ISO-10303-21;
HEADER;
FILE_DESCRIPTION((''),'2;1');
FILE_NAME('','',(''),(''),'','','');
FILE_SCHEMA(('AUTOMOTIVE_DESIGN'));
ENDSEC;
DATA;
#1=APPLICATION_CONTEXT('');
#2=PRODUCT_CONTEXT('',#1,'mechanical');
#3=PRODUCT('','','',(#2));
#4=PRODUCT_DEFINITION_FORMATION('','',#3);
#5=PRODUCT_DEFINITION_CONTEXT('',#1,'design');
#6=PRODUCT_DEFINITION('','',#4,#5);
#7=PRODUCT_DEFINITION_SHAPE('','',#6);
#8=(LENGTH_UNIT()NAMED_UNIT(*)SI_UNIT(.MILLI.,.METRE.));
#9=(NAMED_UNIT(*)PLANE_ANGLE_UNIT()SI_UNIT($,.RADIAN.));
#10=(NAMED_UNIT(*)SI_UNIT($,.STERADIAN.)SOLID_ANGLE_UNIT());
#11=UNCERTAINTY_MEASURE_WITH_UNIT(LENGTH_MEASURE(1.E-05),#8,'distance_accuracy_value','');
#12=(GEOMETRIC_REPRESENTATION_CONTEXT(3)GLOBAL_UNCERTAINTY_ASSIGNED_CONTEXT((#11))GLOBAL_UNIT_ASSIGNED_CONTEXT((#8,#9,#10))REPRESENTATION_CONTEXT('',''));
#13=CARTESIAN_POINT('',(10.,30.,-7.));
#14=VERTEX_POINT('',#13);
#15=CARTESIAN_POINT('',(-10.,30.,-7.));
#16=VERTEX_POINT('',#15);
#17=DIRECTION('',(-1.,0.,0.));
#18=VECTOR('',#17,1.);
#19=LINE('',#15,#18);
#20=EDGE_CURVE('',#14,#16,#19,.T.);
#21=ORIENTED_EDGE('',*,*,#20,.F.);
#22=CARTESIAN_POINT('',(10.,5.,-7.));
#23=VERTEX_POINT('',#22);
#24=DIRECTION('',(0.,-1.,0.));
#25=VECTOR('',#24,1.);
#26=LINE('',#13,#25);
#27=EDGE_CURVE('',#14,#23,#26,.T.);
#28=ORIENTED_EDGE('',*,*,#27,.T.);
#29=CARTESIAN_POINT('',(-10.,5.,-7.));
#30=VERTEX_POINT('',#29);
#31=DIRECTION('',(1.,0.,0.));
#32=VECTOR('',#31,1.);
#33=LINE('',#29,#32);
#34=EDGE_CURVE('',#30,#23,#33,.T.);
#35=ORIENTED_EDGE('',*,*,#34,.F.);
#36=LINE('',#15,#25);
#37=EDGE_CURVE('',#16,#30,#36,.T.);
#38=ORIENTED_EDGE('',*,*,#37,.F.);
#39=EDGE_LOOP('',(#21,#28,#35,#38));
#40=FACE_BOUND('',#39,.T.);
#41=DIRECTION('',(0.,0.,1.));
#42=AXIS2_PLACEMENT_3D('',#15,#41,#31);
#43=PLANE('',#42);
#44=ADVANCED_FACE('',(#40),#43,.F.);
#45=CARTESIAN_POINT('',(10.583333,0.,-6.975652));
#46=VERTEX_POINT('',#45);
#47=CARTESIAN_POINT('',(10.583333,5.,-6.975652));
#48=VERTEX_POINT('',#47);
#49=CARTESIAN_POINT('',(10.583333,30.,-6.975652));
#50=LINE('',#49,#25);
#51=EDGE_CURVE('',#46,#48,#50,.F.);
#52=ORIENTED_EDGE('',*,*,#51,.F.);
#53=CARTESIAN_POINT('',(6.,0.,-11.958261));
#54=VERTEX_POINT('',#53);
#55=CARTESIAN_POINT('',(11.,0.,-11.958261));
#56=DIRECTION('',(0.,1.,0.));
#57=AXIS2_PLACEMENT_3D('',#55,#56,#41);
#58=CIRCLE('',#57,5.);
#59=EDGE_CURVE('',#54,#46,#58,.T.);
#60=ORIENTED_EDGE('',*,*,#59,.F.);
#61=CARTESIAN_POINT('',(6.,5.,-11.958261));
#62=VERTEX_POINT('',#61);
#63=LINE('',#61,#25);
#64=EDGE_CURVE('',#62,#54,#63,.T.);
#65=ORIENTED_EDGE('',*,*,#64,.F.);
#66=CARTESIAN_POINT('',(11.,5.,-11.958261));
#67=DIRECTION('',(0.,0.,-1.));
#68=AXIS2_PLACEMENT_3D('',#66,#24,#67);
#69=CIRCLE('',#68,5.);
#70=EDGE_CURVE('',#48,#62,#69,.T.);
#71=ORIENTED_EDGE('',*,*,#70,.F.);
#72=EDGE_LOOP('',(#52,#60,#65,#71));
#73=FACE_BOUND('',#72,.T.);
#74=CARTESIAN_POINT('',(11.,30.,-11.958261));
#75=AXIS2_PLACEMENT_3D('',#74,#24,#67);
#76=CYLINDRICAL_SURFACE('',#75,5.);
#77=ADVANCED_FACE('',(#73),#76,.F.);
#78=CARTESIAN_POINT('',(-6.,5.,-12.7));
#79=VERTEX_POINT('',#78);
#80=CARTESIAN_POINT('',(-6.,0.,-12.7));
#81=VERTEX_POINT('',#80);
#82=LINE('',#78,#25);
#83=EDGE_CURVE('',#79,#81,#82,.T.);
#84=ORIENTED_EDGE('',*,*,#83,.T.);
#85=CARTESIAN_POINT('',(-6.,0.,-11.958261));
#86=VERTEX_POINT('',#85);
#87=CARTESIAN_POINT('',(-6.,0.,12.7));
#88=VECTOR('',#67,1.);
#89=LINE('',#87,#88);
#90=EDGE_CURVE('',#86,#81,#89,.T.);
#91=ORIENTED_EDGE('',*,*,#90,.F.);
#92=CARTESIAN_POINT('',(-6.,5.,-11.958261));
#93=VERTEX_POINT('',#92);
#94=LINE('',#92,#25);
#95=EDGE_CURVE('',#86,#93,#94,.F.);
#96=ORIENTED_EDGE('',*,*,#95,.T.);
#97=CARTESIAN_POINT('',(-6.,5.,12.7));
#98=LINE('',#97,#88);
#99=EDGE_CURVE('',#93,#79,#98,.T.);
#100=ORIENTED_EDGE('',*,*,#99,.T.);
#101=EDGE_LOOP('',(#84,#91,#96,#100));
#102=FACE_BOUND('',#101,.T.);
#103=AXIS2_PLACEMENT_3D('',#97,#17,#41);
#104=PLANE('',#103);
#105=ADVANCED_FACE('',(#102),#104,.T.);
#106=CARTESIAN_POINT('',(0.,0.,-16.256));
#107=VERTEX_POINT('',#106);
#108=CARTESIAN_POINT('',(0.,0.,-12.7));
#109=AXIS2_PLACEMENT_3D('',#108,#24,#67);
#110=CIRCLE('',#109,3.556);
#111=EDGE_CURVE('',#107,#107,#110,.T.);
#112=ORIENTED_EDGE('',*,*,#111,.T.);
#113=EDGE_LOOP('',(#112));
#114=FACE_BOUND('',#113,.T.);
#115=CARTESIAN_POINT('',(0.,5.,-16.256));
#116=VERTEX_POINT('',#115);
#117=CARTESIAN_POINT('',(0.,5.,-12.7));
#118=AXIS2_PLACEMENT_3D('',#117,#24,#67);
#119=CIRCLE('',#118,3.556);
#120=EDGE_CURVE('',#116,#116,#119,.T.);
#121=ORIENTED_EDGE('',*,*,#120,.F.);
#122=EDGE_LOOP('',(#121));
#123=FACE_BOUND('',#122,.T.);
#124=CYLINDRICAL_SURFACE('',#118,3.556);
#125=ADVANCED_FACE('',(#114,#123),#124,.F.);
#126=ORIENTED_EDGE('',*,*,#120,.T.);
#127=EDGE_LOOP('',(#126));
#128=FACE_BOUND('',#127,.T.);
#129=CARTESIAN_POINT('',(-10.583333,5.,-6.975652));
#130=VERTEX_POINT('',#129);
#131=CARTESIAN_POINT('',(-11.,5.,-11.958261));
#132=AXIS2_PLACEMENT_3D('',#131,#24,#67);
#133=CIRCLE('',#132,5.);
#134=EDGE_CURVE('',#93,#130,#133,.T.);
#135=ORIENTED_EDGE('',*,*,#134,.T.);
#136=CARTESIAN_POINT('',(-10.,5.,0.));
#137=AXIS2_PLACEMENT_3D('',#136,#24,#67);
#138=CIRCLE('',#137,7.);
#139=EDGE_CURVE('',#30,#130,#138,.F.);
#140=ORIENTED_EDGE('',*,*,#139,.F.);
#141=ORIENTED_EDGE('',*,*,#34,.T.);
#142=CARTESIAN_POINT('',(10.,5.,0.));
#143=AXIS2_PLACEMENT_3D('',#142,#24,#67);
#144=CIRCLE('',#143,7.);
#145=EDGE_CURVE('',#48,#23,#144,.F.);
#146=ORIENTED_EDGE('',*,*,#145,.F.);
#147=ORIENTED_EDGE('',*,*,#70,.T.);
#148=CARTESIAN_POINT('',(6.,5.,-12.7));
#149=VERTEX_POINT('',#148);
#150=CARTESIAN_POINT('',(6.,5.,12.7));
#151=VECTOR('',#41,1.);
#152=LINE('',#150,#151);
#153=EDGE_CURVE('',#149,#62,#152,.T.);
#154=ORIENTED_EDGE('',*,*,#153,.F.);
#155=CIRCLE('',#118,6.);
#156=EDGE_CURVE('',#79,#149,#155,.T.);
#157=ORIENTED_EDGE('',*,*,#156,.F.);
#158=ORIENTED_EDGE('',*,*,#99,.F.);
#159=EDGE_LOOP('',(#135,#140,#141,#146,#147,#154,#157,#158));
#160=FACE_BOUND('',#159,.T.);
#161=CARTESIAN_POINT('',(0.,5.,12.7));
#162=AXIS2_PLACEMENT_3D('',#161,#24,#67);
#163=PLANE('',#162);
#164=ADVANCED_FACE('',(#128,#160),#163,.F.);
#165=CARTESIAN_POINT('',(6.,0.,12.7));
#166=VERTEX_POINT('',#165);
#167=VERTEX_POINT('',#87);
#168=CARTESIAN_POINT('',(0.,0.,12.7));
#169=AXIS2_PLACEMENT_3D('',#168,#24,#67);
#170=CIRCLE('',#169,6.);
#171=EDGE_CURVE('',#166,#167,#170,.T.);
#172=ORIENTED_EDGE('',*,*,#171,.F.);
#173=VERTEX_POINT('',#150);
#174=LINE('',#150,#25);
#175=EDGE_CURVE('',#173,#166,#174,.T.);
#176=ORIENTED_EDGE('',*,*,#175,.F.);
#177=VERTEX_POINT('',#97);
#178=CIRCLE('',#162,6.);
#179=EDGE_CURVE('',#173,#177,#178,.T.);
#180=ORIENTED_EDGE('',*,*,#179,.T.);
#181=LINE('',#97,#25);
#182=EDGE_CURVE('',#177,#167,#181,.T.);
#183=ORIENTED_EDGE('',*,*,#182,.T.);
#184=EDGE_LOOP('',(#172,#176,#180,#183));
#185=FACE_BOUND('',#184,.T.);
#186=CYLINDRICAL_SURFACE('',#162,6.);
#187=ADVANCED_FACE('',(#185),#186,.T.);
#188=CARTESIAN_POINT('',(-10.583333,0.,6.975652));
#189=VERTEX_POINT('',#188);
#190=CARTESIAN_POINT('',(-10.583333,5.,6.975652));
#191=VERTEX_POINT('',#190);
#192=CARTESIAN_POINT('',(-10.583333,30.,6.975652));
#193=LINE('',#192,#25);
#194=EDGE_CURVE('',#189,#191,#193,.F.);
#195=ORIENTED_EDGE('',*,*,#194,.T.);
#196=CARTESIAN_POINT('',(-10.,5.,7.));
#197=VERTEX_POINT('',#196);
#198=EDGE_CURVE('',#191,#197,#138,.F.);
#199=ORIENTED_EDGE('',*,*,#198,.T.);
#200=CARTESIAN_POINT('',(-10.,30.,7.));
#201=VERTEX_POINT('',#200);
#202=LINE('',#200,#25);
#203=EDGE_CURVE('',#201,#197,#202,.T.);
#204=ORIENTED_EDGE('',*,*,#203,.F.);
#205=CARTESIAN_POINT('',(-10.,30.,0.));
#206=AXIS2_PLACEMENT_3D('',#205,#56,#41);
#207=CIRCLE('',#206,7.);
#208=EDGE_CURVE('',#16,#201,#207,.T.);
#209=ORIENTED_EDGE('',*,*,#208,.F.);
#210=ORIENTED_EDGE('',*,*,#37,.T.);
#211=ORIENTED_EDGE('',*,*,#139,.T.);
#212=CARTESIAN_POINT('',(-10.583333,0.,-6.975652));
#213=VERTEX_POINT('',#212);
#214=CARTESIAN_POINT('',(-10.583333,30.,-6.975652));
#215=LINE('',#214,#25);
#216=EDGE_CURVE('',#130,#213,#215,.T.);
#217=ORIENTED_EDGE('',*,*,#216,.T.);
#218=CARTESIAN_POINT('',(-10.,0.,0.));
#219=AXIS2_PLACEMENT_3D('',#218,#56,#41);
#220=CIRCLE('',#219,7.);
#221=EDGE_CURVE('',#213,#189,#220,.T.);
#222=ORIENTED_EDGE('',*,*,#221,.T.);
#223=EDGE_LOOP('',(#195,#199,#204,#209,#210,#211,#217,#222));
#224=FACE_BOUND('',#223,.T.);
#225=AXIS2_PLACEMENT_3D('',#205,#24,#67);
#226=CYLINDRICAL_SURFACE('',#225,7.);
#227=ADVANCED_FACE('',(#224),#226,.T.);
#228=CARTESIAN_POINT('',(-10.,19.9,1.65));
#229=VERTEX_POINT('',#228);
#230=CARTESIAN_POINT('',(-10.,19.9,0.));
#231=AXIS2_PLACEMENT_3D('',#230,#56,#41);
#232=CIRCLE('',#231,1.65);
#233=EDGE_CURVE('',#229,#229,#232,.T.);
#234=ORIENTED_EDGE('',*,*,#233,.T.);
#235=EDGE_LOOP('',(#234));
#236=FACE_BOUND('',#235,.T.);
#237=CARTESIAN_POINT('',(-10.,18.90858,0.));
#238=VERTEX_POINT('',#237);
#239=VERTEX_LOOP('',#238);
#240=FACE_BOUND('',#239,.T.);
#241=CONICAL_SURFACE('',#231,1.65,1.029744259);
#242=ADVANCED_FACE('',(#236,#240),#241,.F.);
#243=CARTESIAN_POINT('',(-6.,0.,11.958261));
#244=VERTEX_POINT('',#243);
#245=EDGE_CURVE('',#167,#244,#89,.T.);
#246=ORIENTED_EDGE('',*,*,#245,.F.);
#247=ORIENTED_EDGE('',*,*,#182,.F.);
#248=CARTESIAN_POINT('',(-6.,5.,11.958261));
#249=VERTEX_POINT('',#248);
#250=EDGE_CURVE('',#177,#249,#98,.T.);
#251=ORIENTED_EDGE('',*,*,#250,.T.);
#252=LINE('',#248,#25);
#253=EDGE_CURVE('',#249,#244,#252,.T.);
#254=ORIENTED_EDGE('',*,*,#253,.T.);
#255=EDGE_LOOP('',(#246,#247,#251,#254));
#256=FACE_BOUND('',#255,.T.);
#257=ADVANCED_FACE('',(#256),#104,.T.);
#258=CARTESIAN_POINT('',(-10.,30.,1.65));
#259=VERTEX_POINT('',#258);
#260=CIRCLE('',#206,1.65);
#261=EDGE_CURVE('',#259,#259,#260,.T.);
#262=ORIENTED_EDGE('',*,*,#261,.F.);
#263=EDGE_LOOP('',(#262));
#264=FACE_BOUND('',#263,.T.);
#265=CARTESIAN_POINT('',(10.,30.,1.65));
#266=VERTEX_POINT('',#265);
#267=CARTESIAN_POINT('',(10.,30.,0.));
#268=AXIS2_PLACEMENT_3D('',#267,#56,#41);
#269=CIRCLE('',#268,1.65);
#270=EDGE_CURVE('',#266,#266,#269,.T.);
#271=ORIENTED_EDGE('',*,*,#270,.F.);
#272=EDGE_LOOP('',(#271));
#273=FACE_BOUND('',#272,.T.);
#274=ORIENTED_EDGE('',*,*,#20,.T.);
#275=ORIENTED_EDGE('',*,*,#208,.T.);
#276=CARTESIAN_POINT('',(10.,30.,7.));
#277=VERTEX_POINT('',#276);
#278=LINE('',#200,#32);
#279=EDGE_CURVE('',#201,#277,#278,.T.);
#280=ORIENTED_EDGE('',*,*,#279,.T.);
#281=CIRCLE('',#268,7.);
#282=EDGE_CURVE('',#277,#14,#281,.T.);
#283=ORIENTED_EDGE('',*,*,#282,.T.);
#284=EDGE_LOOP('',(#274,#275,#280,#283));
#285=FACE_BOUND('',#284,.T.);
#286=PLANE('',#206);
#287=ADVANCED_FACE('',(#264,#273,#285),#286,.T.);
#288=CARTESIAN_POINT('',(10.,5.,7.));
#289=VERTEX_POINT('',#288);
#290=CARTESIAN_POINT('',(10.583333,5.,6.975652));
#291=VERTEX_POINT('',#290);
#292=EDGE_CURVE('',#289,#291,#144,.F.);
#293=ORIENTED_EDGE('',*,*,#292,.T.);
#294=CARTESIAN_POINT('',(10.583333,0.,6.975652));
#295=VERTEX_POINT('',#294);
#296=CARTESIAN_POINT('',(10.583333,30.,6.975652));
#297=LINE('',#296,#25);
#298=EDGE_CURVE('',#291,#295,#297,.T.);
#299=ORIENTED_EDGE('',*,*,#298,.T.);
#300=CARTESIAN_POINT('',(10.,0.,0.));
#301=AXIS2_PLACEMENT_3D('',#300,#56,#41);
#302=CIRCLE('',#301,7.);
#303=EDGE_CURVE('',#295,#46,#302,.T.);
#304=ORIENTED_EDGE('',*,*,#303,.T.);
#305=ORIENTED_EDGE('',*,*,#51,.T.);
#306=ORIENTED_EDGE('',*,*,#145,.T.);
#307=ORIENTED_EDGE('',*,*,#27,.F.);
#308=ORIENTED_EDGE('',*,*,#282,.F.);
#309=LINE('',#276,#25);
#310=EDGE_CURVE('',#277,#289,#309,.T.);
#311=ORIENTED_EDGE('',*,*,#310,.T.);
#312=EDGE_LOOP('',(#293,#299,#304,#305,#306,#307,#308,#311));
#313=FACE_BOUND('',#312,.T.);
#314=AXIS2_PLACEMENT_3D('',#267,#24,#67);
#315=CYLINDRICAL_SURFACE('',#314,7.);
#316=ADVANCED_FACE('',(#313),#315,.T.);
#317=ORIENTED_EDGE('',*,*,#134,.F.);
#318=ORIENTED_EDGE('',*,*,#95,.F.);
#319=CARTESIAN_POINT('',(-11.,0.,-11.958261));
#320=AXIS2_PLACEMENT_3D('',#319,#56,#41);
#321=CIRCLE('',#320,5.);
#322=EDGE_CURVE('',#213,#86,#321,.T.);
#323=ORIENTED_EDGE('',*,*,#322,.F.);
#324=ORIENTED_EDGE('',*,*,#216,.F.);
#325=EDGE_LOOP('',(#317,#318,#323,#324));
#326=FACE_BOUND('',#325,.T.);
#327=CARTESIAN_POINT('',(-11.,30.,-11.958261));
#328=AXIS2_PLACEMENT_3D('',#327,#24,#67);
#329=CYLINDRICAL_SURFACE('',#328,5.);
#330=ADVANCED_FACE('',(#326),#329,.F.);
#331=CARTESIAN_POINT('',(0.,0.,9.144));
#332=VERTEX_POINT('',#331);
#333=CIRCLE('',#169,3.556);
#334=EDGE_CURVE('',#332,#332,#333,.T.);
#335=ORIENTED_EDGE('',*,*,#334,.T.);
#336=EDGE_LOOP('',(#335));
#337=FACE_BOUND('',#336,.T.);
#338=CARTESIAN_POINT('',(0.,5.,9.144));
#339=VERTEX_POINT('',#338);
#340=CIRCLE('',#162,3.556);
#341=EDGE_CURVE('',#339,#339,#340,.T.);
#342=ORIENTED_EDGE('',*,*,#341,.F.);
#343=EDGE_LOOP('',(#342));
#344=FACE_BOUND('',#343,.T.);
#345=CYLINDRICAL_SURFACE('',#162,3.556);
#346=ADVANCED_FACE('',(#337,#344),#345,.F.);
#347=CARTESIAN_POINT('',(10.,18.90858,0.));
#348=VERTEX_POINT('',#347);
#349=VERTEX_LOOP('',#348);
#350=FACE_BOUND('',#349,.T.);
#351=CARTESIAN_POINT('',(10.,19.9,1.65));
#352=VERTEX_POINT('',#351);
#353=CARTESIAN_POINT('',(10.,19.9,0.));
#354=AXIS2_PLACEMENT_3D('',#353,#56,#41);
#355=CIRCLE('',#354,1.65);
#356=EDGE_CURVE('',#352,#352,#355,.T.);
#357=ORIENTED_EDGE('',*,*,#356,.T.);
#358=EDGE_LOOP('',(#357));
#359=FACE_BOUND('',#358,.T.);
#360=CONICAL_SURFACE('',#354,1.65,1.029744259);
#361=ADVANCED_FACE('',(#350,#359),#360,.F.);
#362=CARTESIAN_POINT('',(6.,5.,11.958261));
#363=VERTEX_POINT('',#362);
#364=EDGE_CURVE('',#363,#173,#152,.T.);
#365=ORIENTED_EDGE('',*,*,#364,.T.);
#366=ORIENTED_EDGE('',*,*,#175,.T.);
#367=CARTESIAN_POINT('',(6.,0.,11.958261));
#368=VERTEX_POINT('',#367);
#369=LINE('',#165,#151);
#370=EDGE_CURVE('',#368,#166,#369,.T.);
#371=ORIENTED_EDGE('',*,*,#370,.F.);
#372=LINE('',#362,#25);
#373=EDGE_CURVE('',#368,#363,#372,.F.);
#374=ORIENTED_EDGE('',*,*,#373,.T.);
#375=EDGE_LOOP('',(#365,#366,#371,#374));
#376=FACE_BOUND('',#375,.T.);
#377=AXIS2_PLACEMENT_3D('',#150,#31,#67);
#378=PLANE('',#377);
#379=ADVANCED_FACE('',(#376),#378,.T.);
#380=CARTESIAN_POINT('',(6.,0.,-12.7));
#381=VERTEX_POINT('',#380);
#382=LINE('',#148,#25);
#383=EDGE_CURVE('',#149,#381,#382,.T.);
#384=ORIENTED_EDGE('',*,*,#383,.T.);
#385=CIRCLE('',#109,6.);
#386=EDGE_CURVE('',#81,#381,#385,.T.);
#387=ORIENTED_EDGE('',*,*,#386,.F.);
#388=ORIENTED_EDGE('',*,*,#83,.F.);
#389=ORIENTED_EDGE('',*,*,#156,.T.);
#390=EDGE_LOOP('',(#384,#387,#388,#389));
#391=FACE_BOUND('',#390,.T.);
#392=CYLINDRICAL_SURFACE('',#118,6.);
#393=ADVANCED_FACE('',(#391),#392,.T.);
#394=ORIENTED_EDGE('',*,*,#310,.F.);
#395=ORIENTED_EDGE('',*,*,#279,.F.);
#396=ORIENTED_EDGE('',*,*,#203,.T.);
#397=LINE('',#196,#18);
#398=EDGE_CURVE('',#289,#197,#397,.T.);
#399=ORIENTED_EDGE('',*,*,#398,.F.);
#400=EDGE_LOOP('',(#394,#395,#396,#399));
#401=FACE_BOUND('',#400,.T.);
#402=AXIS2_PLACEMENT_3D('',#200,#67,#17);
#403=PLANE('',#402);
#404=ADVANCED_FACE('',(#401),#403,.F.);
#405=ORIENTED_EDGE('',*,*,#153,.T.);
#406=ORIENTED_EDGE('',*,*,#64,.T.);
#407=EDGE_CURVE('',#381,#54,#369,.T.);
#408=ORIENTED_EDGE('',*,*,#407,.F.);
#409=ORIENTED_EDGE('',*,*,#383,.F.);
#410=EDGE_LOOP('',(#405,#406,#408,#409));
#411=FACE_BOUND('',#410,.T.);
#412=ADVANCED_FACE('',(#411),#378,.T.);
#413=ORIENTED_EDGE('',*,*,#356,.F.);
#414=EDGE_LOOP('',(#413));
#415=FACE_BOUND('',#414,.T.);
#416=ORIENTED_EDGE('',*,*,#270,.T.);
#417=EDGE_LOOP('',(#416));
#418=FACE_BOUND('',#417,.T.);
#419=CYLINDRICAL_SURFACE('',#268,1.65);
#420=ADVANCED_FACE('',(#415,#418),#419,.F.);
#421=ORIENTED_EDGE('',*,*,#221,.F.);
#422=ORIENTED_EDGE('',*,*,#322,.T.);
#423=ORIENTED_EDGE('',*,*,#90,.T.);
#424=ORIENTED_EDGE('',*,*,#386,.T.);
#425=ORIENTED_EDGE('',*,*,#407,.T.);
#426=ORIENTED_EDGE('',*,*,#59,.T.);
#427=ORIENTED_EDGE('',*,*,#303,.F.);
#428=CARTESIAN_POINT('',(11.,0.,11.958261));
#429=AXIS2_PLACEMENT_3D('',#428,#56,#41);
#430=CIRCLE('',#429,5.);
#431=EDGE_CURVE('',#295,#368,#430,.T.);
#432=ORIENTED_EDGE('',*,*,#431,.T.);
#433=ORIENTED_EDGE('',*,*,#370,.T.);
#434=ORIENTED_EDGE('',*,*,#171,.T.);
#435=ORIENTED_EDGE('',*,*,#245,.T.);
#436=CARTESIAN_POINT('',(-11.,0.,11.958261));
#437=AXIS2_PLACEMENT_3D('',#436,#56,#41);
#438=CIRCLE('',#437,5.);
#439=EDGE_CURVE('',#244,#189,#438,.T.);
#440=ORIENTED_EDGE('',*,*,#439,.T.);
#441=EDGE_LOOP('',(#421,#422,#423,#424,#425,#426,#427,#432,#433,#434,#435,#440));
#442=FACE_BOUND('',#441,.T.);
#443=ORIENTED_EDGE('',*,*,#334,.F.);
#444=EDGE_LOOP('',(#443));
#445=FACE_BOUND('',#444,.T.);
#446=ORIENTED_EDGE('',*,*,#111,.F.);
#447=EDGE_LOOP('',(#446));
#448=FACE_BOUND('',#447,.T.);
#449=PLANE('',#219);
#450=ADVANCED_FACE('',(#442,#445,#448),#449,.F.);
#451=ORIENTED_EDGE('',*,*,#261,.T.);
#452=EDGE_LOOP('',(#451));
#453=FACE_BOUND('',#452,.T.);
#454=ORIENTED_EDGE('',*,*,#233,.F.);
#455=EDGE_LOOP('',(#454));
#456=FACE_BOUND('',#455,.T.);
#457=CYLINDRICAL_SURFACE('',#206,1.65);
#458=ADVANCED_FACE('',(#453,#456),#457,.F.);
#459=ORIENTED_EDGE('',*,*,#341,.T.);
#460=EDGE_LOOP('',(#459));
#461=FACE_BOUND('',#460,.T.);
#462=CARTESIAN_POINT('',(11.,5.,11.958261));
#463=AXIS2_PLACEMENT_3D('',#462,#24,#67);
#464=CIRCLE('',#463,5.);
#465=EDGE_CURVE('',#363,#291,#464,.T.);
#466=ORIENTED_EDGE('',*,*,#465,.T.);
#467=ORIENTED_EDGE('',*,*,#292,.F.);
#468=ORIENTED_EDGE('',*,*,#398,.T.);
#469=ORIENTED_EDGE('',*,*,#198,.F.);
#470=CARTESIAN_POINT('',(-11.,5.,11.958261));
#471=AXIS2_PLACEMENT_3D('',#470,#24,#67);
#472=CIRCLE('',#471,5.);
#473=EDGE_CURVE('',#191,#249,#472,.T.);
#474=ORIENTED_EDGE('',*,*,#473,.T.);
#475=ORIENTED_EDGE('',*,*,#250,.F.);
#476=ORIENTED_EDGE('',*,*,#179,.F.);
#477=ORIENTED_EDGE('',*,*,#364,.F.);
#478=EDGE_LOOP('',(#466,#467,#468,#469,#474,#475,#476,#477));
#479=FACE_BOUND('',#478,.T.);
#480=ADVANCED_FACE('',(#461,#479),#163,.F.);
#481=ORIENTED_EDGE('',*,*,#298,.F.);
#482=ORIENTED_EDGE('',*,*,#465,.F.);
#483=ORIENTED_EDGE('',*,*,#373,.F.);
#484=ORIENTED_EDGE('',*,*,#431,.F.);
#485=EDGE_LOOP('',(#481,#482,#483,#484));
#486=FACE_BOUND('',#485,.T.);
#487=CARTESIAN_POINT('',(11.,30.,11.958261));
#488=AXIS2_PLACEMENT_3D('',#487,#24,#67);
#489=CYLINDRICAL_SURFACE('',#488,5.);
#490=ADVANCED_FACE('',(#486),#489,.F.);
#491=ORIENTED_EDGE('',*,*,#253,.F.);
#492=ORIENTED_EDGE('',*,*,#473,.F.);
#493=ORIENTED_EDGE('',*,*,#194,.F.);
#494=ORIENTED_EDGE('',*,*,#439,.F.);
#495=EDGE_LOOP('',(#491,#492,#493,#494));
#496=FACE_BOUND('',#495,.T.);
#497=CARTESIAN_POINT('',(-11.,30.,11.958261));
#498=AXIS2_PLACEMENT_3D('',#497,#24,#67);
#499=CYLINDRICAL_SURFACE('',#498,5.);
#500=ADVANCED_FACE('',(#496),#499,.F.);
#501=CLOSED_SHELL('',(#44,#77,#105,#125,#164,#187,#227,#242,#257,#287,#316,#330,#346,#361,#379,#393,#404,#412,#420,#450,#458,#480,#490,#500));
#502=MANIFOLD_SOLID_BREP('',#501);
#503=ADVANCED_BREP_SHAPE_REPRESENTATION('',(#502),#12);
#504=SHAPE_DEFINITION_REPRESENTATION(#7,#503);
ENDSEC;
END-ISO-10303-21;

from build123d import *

# Parameters (mm, degrees)
BOSS_EXTRUDE1_DEPTH       = 30
M4X0_7_TAPPED_HOLE1_D     = 3.3
M4X0_7_TAPPED_HOLE1_DEPTH = 10.1
M4X0_7_TAPPED_HOLE1_TIP   = 0.991420021
SKETCH4_R                 = 3.556
BOSS_EXTRUDE2_DEPTH       = 5
FILLET1_R                 = 5


with BuildPart() as part:
    # Sketch1 → Boss-Extrude1 (new body)
    with BuildSketch(Plane(origin=(0, 0, 0), x_dir=(1, 0, 0), z_dir=(0, 1, 0))):
        with BuildLine():
            Line((-10, -7), (10, -7))
            ThreePointArc((10, -7), (17, 0), (10, 7))
            Line((10, 7), (-10, 7))
            ThreePointArc((-10, 7), (-17, 0), (-10, -7))
        make_face()
    extrude(amount=BOSS_EXTRUDE1_DEPTH)

    # M4x0.7 Tapped Hole1
    with Locations(Plane(origin=(0, 30, 0), x_dir=(1, 0, 0), z_dir=(0, 1, 0))):
        with Locations((-10, 0), (10, 0)):
            Hole(M4X0_7_TAPPED_HOLE1_D / 2, depth=M4X0_7_TAPPED_HOLE1_DEPTH)
            with Locations((0, 0, -(M4X0_7_TAPPED_HOLE1_DEPTH + M4X0_7_TAPPED_HOLE1_TIP / 2))):  # 118° drill point
                Cone(0, M4X0_7_TAPPED_HOLE1_D / 2, M4X0_7_TAPPED_HOLE1_TIP, mode=Mode.SUBTRACT)

    # Sketch4 → Boss-Extrude2 (add)
    with BuildSketch(Plane.XZ):
        with BuildLine():
            Line((6, 12.7), (6, -12.7))
            ThreePointArc((6, -12.7), (0, -18.7), (-6, -12.7))
            Line((-6, -12.7), (-6, 12.7))
            ThreePointArc((-6, 12.7), (0, 18.7), (6, 12.7))
        make_face()
        with Locations(Location((0, 12.7, 0), (0, 0, 270))):
            Circle(SKETCH4_R, mode=Mode.SUBTRACT)
        with Locations(Location((0, -12.7, 0), (0, 0, 270))):
            Circle(SKETCH4_R, mode=Mode.SUBTRACT)
    extrude(amount=-BOSS_EXTRUDE2_DEPTH)

    # Fillet1
    # the kernel refuses this fillet: 5 mm, written as the material it adds along each edge
    with BuildSketch(Plane(origin=(-6, 5, 7), x_dir=(-0.9999858901973535, 0, -0.0053121941047544466), z_dir=(0, -1, 0)), Plane(origin=(-6, 0, -7), x_dir=(-0.9999858901973535, 0, 0.005312194104754061), z_dir=(0, 1, 0)), Plane(origin=(6, 5, -7), x_dir=(0.9999858901973535, 0, 0.005312194104753284), z_dir=(0, -1, 0)), Plane(origin=(6, 0, 7), x_dir=(0.9999858901973535, 0, -0.0053121941047534794), z_dir=(0, 1, 0))) as fillet1_piece_1:
        with BuildLine():
            CenterArc((4.973590207, -4.984751754), FILLET1_R, 94.475824114, 85.219808153)
            Line((-0.026339243, -4.958190783), (-0.526332189, -4.955534686))
            Line((-0.526332189, -4.955534686), (-0.499992945, 0.002656097))
            Line((-0.499992945, 0.002656097), (0.002656097, 0.499992945))
            ThreePointArc((0.002656097, 0.499992945), (4.002599658, 0.478744169), (4.544378784, 0.498475175))
            Line((4.544378784, 0.498475175), (4.583398004, 0))
        make_face()
    extrude(amount=5)


solid = part.part
